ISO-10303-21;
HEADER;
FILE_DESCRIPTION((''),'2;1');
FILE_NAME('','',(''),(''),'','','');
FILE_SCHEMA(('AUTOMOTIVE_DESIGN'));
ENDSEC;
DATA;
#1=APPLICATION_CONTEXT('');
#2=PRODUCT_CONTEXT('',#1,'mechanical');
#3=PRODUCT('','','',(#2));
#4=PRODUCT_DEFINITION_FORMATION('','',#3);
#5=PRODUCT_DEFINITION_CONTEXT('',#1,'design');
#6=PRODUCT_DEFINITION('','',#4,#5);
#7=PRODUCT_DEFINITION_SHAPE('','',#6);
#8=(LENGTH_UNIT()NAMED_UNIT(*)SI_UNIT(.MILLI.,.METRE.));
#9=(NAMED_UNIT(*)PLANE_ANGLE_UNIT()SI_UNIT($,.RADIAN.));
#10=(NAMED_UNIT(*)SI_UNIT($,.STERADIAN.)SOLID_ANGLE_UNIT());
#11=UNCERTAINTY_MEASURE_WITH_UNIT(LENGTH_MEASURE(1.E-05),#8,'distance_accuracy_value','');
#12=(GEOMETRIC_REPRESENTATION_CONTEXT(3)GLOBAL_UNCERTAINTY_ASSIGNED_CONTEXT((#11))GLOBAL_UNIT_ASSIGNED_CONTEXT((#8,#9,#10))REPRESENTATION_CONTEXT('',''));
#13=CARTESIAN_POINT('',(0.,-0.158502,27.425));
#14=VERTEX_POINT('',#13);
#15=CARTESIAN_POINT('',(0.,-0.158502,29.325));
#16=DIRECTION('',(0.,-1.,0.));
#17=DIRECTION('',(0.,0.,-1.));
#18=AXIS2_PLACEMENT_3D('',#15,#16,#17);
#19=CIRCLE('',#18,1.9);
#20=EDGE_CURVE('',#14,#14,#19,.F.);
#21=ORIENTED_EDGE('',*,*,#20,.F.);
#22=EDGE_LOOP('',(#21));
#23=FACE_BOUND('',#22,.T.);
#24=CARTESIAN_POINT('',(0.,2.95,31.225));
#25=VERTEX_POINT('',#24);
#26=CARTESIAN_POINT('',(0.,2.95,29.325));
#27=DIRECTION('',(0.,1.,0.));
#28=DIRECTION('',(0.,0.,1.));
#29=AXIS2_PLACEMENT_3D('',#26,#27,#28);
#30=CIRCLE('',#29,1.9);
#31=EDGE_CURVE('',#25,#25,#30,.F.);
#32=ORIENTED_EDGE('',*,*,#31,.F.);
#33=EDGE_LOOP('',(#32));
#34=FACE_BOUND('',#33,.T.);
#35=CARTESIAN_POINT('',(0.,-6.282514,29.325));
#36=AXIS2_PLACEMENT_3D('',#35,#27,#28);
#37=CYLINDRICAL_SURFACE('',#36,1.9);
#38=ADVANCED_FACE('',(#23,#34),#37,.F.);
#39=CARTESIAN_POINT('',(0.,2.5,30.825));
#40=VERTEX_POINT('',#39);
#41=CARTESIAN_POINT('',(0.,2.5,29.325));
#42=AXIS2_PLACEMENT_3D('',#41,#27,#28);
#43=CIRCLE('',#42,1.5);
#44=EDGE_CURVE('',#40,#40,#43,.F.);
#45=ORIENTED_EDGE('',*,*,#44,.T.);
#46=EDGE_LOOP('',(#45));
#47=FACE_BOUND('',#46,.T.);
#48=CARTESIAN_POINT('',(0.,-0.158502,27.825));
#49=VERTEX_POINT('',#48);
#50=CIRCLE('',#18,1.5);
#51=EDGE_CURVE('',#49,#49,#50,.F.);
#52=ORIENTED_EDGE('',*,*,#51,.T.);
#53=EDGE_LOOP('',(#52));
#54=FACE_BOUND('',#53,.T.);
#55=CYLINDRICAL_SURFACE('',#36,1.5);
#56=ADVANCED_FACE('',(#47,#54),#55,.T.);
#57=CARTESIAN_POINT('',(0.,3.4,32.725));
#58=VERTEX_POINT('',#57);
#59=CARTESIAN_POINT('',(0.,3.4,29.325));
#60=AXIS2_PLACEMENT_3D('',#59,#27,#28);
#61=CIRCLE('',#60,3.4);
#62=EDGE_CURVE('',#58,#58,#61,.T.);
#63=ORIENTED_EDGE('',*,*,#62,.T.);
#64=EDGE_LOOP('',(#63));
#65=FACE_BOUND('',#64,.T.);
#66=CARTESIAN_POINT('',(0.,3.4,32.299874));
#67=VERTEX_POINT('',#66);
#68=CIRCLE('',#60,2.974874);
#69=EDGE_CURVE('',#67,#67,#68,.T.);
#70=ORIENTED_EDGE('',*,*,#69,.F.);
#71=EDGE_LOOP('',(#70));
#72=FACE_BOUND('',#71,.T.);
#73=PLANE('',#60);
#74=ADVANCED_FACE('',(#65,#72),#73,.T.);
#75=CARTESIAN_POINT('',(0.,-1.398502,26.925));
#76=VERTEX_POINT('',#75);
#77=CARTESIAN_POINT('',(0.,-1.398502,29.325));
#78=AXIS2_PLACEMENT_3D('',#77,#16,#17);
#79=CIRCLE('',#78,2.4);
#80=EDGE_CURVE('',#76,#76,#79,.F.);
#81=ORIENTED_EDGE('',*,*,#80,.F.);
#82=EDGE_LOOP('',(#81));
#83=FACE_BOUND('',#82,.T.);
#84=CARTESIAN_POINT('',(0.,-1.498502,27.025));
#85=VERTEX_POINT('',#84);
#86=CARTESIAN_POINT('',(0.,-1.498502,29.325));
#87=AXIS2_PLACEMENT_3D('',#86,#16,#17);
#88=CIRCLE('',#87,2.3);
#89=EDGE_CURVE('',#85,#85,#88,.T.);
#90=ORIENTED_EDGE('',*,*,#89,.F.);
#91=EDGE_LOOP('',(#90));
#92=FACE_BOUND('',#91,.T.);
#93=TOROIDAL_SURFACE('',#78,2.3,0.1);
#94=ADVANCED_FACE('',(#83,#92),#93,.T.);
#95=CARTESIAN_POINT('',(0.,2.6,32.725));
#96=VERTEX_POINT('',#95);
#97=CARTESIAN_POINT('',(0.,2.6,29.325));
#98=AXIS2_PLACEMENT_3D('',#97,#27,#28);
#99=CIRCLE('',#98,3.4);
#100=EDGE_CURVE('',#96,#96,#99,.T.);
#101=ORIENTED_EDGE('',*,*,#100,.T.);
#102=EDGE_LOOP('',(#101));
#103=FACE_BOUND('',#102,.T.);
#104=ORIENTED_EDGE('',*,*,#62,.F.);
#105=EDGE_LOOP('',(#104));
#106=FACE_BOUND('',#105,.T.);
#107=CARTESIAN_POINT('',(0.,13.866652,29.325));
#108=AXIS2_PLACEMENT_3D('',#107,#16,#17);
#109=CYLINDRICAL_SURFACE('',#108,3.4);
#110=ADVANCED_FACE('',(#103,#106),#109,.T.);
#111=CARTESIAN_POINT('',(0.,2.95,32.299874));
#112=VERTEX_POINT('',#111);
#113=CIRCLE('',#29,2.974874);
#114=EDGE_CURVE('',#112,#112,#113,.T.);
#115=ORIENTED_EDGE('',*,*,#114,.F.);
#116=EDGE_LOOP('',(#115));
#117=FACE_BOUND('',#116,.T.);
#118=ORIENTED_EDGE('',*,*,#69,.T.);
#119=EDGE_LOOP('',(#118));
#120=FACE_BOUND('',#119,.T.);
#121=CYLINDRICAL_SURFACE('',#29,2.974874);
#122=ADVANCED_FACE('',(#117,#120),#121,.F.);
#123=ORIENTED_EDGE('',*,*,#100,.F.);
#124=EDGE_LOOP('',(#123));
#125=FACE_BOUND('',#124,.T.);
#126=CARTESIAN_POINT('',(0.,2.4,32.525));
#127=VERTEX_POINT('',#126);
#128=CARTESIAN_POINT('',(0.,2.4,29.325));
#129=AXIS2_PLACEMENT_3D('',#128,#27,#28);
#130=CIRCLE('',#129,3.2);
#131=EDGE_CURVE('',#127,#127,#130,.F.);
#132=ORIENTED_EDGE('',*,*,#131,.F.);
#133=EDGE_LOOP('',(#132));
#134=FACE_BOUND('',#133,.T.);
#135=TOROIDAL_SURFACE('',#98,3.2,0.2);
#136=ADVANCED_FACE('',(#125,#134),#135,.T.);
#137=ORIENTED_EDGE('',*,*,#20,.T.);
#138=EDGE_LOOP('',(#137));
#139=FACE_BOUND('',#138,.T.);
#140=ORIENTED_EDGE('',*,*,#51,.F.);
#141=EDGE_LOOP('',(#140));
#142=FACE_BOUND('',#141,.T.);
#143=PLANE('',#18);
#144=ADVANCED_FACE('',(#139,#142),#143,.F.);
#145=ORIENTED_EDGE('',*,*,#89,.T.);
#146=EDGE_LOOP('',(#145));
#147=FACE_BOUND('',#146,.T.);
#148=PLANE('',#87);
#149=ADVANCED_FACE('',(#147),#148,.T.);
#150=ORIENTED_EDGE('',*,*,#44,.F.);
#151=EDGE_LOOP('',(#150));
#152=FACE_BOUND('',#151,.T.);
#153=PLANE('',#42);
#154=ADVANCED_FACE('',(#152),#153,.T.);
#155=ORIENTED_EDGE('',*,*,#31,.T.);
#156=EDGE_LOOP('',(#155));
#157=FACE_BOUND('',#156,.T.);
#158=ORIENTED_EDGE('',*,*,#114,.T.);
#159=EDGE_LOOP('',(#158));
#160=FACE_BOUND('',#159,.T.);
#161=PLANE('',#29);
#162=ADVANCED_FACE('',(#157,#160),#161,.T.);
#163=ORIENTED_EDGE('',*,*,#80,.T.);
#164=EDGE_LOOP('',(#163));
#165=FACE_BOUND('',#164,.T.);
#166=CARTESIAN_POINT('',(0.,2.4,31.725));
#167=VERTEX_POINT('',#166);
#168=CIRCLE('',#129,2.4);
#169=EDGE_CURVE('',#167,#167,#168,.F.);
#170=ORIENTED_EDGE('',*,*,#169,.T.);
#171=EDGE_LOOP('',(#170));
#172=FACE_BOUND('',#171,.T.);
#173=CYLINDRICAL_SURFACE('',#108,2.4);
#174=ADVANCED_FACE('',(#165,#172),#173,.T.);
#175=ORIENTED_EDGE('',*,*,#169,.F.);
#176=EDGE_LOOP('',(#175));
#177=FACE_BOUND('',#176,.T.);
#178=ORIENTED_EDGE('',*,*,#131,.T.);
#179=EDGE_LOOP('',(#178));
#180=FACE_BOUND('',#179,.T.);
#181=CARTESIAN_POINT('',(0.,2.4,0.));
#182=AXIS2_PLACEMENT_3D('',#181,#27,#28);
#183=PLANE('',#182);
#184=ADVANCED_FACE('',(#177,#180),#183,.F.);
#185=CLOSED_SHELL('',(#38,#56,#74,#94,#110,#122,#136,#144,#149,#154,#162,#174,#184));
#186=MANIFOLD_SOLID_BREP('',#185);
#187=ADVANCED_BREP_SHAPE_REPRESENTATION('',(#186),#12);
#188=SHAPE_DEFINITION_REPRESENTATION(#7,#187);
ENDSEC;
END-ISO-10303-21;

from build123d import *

# Parameters (mm, degrees)
FILLET1_R          = 0.2
SKETCH1_R          = 2.974873734
CUT_EXTRUDE1_DEPTH = 0.45


# Read off the part's stored shape, not the designer's step: Stock-Finger_Rubber_Sensor+Button-1
with BuildPart() as part:
    # Stock-Finger_Rubber_Sensor+Button-1 outl → Stock-Finger_Rubber_Sensor+Button-1 (revolve)
    with BuildSketch(Plane.XY.offset(29.325)):
        with BuildLine():
            Line((1.9, 3.4), (1.9, -0.158502039))
            Line((1.9, -0.158502039), (1.5, -0.158502039))
            Line((1.5, -0.158502039), (1.5, 2.5))
            Line((1.5, 2.5), (0, 2.5))
            Line((0, 2.5), (0, -1.498502039))
            Line((0, -1.498502039), (2.3, -1.498502039))
            ThreePointArc((2.3, -1.498502039), (2.370710678, -1.469212717), (2.4, -1.398502039))
            Line((2.4, -1.398502039), (2.4, 2.4))
            Line((2.4, 2.4), (3.4, 2.4))
            Line((3.4, 2.4), (3.4, 3.4))
            Line((3.4, 3.4), (1.9, 3.4))
        make_face()
    revolve(axis=Axis((0, 0, 29.325), (0, 1, 0)))

    # Fillet1
    fillet1_edges = [part.edges().sort_by_distance(p)[0] for p in [
        (-3.4, 2.4, 29.325),
    ]]
    fillet(fillet1_edges, radius=FILLET1_R)

    # Sketch1 → Cut-Extrude1 (cut)
    with BuildSketch(Plane(origin=(0, 3.4, 0), x_dir=(1, 0, 0), z_dir=(0, 1, 0))):
        with Locations(Location((0, -29.325, 0), (0, 0, 270))):
            Circle(SKETCH1_R)
    extrude(amount=-CUT_EXTRUDE1_DEPTH, mode=Mode.SUBTRACT)


solid = part.part
